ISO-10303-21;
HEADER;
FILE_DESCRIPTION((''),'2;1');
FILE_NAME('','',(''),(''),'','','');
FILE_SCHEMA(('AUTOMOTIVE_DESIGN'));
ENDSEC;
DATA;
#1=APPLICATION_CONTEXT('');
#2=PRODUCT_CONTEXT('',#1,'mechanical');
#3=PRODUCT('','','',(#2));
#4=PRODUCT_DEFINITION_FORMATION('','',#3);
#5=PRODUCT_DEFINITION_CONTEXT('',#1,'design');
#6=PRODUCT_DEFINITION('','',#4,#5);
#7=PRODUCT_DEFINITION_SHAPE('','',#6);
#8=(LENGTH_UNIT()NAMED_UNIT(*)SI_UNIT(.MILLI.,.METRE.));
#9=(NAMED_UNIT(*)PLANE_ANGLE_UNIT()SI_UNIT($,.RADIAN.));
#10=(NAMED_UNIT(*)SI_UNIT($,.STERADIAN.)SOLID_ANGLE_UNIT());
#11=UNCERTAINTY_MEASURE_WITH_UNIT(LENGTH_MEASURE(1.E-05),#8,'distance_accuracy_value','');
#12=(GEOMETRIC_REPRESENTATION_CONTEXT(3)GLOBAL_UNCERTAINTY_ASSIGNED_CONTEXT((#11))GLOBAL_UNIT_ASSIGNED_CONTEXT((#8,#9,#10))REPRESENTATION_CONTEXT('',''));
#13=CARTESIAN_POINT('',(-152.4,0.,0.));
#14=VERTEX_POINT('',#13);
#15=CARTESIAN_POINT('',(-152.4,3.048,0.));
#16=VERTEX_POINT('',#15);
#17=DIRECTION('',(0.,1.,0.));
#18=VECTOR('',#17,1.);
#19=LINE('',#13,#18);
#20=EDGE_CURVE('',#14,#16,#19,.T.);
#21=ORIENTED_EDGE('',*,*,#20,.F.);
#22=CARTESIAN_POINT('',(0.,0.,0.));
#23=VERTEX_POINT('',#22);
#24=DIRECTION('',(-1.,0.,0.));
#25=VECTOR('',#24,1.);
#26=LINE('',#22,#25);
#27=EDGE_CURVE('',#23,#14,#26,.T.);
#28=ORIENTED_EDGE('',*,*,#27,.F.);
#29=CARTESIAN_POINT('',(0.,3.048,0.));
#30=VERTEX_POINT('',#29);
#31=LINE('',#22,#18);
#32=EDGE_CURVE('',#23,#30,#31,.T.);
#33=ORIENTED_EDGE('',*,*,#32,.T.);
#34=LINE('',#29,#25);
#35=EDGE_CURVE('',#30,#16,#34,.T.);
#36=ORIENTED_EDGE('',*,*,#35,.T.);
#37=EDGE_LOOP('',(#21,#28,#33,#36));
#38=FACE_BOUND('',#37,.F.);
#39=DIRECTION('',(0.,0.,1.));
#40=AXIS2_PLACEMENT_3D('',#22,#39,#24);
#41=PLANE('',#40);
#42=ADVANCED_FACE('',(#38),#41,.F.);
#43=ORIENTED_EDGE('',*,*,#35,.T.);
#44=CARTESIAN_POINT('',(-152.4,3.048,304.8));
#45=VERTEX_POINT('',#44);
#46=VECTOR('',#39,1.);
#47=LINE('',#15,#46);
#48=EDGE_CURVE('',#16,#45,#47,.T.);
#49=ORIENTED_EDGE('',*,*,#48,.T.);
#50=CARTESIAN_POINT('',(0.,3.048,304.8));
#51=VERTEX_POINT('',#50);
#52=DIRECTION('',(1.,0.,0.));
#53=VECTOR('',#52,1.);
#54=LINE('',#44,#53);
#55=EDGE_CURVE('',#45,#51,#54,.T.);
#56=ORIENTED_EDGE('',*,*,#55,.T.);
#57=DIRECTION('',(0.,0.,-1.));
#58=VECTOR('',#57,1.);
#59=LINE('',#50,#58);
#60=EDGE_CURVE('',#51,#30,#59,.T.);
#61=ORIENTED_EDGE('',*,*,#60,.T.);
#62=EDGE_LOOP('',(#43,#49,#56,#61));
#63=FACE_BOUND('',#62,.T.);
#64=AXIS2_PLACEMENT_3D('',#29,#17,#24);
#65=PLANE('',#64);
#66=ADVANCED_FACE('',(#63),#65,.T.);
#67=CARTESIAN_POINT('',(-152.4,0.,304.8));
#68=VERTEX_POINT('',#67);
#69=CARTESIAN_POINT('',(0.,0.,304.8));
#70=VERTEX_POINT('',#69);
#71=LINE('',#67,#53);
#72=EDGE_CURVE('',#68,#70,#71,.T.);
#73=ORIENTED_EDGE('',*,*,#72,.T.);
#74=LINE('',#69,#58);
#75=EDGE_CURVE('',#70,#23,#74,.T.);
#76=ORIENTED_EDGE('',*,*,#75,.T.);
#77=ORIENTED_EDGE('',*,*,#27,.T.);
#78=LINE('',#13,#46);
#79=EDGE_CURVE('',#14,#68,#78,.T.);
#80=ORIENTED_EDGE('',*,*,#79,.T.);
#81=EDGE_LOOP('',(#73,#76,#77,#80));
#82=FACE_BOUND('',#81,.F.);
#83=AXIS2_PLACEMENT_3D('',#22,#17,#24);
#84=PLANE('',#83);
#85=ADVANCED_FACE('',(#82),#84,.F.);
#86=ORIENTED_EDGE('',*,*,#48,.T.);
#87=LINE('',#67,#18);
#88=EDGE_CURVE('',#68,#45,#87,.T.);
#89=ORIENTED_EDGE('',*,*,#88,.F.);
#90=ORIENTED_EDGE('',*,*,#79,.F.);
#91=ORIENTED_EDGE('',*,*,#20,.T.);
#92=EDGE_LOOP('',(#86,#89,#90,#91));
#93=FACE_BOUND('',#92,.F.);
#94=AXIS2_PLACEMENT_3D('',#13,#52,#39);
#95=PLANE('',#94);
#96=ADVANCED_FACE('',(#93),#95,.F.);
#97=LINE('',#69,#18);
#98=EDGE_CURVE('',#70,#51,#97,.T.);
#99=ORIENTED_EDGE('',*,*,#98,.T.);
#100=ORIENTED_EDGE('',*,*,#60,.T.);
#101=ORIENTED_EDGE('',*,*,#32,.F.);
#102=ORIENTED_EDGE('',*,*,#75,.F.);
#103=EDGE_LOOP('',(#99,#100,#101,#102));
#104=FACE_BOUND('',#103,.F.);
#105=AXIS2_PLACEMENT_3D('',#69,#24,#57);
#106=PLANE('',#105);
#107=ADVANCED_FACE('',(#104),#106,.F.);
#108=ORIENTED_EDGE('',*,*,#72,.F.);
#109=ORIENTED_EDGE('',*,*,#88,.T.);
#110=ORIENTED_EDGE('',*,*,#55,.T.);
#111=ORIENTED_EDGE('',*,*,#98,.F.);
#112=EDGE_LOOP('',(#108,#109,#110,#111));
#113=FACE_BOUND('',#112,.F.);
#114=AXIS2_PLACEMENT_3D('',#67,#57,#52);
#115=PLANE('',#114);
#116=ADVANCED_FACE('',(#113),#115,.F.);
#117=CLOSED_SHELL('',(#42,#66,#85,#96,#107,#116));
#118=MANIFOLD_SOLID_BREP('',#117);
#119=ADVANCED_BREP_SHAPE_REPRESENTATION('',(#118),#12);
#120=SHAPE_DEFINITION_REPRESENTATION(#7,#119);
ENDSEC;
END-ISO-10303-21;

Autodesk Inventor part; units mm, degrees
ref_plane "YZ Plane" through (0, 0, 0) normal (1, 0, 0) x (0, 1, 0)
ref_plane "XZ Plane" through (0, 0, 0) normal (0, 1, 0) x (-1, 0, 0)
ref_plane "XY Plane" through (0, 0, 0) normal (0, 0, 1) x (1, 0, 0)
sketch "Sketch1" plane through (0, 0, 0) normal (0, 1, 0) x (-1, 0, 0)
  line L0 (0, 0) -> (152.4, 0)
  line L1 (152.4, 0) -> (152.4, 304.8)
  line L2 (152.4, 304.8) -> (0, 304.8)
  line L3 (0, 304.8) -> (0, 0)
  dimension "d0" = 152.4
  dimension "d1" = 304.8
extrude "Plate1" add sketch "Sketch1" along normal blind 3.048
equation "\"BendRadius\" = Thickness"
equation "\"BendReliefWidth\" = Thickness"
equation "\"BendReliefDepth\" = 0.5 * Thickness"
equation "\"CornerReliefSize\" = 4 * Thickness"
equation "\"MinimumRemnant\" = 2 * Thickness"
equation "\"TransitionRadius\" = BendRadius"
equation "\"JacobiRadiusSize\" = Thickness"
equation "\"GapSize\" = Thickness"
equation "\"d2\" = BendRadius"
equation "\"Thickness\" = 3.048"
properties part number "box"
